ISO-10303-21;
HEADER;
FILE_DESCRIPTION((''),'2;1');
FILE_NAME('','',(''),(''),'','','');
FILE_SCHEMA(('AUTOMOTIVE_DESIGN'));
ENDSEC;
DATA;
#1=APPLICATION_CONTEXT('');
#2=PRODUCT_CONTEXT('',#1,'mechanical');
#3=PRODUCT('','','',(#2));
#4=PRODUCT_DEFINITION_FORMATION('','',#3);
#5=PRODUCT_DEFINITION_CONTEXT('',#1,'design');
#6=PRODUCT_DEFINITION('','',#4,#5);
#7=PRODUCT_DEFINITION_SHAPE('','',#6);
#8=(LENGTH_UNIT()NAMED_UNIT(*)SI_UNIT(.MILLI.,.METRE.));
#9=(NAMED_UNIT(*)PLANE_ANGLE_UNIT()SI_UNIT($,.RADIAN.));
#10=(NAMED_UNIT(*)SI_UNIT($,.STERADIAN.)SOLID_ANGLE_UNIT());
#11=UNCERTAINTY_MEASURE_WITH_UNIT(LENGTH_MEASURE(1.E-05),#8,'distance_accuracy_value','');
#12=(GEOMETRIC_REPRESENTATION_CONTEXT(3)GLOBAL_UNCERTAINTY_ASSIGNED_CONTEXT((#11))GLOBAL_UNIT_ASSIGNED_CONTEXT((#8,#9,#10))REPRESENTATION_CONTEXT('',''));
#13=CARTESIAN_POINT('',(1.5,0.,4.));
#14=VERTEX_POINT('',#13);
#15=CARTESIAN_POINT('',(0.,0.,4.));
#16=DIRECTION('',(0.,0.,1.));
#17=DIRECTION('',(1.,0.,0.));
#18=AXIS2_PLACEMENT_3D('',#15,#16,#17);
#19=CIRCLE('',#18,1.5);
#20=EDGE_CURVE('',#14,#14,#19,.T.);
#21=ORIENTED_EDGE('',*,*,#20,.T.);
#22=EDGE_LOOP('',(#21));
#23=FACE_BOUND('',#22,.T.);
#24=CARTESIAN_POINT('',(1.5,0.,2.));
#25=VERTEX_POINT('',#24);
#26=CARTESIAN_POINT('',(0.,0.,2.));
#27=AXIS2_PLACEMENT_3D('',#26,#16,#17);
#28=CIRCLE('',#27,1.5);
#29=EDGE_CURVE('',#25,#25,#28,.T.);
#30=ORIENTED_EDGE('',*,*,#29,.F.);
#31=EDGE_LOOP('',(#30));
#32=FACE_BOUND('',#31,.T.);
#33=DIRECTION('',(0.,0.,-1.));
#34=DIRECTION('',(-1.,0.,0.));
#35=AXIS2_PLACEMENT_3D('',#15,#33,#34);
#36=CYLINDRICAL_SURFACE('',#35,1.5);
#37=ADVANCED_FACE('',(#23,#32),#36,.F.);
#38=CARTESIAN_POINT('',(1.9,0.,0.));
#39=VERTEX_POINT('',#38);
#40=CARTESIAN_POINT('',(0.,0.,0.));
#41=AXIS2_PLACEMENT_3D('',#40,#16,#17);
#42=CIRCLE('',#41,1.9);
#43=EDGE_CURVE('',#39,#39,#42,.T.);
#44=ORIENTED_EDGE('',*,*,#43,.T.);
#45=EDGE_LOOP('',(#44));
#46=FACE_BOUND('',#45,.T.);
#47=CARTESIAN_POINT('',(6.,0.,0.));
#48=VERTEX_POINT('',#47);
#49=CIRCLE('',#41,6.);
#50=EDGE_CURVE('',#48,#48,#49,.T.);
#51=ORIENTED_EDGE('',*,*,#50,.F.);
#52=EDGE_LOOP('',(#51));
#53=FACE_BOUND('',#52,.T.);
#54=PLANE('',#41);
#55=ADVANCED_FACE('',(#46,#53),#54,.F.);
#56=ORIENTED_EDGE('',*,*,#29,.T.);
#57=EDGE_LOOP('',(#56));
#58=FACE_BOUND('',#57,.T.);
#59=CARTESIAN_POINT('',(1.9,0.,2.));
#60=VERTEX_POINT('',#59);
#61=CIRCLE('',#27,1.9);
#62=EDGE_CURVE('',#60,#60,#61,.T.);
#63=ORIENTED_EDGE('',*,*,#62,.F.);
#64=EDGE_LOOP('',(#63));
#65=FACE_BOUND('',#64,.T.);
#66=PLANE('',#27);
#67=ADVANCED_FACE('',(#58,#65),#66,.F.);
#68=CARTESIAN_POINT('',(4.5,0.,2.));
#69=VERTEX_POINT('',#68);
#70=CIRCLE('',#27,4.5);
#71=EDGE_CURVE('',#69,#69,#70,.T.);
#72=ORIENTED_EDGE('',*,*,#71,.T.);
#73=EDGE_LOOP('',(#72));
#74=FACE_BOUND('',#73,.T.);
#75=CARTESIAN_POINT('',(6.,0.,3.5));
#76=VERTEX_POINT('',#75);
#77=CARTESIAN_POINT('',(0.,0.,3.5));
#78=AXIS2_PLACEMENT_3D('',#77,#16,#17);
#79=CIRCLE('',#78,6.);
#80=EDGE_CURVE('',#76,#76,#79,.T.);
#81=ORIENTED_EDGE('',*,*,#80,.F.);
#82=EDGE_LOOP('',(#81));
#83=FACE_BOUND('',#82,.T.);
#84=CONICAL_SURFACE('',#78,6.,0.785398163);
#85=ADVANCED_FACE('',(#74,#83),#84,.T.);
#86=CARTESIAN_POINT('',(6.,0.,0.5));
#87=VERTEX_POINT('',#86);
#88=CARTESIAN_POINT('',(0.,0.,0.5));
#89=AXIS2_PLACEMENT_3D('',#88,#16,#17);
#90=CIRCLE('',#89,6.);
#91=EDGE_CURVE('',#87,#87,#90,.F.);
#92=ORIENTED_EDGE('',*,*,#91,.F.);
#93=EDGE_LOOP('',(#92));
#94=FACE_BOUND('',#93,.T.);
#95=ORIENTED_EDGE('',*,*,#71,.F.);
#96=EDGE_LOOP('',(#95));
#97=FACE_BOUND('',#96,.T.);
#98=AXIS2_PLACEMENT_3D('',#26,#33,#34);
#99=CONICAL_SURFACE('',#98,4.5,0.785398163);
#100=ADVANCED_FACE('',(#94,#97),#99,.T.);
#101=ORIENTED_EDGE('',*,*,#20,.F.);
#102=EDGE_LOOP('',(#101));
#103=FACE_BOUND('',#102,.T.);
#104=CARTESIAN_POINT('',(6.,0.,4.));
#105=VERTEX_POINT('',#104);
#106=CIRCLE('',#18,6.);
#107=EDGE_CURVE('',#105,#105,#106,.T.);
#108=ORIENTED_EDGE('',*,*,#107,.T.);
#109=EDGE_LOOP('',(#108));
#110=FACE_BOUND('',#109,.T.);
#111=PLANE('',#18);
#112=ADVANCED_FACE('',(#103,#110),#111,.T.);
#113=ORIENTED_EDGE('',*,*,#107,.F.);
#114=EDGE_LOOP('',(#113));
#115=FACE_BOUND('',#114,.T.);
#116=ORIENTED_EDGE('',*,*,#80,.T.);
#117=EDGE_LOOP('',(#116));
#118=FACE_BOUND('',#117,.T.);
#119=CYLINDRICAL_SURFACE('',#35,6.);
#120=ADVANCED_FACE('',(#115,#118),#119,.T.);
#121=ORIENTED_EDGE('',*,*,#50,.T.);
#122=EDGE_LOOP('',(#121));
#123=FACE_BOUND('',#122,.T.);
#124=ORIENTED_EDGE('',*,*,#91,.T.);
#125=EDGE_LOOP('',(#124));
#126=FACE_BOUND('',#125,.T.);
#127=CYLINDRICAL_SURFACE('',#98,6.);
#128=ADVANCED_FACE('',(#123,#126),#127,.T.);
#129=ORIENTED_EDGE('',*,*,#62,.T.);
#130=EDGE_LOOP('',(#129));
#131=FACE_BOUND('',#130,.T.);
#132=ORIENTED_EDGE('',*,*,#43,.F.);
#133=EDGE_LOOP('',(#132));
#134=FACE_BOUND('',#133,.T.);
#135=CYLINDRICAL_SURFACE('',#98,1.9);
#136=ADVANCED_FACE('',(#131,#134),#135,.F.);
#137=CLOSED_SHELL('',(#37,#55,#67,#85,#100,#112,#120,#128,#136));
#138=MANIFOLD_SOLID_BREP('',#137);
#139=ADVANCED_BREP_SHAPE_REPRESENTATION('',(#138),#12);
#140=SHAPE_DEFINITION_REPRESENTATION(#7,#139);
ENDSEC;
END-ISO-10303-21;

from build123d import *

# Parameters (mm, degrees)
SKETCH1_R           = 6
SKETCH1_R_2         = 1.9
BOSS_EXTRUDE1_DEPTH = 2
CHAMFER1_SIZE       = 1.5
SKETCH2_R           = 6
SKETCH2_R_2         = 1.5
BOSS_EXTRUDE2_DEPTH = 2
CHAMFER2_SIZE       = 1.5


with BuildPart() as part:
    # Sketch1 → Boss-Extrude1 (new body)
    with BuildSketch(Plane.XY):
        Circle(SKETCH1_R)
        Circle(SKETCH1_R_2, mode=Mode.SUBTRACT)
    extrude(amount=BOSS_EXTRUDE1_DEPTH)

    # Chamfer1
    chamfer1_edges = [part.edges().sort_by_distance(p)[0] for p in [
        (-6, 0, 2),
    ]]
    chamfer(chamfer1_edges, length=CHAMFER1_SIZE)

    # Sketch2 → Boss-Extrude2 (add)
    with BuildSketch(Plane.XY.offset(2)):
        Circle(SKETCH2_R)
        Circle(SKETCH2_R_2, mode=Mode.SUBTRACT)
    extrude(amount=BOSS_EXTRUDE2_DEPTH)

    # Chamfer2
    chamfer2_edges = [part.edges().sort_by_distance(p)[0] for p in [
        (-6, 0, 2),
    ]]
    chamfer(chamfer2_edges, length=CHAMFER2_SIZE - 0.0001)  # a hair under: the kernel refuses the full size


solid = part.part
